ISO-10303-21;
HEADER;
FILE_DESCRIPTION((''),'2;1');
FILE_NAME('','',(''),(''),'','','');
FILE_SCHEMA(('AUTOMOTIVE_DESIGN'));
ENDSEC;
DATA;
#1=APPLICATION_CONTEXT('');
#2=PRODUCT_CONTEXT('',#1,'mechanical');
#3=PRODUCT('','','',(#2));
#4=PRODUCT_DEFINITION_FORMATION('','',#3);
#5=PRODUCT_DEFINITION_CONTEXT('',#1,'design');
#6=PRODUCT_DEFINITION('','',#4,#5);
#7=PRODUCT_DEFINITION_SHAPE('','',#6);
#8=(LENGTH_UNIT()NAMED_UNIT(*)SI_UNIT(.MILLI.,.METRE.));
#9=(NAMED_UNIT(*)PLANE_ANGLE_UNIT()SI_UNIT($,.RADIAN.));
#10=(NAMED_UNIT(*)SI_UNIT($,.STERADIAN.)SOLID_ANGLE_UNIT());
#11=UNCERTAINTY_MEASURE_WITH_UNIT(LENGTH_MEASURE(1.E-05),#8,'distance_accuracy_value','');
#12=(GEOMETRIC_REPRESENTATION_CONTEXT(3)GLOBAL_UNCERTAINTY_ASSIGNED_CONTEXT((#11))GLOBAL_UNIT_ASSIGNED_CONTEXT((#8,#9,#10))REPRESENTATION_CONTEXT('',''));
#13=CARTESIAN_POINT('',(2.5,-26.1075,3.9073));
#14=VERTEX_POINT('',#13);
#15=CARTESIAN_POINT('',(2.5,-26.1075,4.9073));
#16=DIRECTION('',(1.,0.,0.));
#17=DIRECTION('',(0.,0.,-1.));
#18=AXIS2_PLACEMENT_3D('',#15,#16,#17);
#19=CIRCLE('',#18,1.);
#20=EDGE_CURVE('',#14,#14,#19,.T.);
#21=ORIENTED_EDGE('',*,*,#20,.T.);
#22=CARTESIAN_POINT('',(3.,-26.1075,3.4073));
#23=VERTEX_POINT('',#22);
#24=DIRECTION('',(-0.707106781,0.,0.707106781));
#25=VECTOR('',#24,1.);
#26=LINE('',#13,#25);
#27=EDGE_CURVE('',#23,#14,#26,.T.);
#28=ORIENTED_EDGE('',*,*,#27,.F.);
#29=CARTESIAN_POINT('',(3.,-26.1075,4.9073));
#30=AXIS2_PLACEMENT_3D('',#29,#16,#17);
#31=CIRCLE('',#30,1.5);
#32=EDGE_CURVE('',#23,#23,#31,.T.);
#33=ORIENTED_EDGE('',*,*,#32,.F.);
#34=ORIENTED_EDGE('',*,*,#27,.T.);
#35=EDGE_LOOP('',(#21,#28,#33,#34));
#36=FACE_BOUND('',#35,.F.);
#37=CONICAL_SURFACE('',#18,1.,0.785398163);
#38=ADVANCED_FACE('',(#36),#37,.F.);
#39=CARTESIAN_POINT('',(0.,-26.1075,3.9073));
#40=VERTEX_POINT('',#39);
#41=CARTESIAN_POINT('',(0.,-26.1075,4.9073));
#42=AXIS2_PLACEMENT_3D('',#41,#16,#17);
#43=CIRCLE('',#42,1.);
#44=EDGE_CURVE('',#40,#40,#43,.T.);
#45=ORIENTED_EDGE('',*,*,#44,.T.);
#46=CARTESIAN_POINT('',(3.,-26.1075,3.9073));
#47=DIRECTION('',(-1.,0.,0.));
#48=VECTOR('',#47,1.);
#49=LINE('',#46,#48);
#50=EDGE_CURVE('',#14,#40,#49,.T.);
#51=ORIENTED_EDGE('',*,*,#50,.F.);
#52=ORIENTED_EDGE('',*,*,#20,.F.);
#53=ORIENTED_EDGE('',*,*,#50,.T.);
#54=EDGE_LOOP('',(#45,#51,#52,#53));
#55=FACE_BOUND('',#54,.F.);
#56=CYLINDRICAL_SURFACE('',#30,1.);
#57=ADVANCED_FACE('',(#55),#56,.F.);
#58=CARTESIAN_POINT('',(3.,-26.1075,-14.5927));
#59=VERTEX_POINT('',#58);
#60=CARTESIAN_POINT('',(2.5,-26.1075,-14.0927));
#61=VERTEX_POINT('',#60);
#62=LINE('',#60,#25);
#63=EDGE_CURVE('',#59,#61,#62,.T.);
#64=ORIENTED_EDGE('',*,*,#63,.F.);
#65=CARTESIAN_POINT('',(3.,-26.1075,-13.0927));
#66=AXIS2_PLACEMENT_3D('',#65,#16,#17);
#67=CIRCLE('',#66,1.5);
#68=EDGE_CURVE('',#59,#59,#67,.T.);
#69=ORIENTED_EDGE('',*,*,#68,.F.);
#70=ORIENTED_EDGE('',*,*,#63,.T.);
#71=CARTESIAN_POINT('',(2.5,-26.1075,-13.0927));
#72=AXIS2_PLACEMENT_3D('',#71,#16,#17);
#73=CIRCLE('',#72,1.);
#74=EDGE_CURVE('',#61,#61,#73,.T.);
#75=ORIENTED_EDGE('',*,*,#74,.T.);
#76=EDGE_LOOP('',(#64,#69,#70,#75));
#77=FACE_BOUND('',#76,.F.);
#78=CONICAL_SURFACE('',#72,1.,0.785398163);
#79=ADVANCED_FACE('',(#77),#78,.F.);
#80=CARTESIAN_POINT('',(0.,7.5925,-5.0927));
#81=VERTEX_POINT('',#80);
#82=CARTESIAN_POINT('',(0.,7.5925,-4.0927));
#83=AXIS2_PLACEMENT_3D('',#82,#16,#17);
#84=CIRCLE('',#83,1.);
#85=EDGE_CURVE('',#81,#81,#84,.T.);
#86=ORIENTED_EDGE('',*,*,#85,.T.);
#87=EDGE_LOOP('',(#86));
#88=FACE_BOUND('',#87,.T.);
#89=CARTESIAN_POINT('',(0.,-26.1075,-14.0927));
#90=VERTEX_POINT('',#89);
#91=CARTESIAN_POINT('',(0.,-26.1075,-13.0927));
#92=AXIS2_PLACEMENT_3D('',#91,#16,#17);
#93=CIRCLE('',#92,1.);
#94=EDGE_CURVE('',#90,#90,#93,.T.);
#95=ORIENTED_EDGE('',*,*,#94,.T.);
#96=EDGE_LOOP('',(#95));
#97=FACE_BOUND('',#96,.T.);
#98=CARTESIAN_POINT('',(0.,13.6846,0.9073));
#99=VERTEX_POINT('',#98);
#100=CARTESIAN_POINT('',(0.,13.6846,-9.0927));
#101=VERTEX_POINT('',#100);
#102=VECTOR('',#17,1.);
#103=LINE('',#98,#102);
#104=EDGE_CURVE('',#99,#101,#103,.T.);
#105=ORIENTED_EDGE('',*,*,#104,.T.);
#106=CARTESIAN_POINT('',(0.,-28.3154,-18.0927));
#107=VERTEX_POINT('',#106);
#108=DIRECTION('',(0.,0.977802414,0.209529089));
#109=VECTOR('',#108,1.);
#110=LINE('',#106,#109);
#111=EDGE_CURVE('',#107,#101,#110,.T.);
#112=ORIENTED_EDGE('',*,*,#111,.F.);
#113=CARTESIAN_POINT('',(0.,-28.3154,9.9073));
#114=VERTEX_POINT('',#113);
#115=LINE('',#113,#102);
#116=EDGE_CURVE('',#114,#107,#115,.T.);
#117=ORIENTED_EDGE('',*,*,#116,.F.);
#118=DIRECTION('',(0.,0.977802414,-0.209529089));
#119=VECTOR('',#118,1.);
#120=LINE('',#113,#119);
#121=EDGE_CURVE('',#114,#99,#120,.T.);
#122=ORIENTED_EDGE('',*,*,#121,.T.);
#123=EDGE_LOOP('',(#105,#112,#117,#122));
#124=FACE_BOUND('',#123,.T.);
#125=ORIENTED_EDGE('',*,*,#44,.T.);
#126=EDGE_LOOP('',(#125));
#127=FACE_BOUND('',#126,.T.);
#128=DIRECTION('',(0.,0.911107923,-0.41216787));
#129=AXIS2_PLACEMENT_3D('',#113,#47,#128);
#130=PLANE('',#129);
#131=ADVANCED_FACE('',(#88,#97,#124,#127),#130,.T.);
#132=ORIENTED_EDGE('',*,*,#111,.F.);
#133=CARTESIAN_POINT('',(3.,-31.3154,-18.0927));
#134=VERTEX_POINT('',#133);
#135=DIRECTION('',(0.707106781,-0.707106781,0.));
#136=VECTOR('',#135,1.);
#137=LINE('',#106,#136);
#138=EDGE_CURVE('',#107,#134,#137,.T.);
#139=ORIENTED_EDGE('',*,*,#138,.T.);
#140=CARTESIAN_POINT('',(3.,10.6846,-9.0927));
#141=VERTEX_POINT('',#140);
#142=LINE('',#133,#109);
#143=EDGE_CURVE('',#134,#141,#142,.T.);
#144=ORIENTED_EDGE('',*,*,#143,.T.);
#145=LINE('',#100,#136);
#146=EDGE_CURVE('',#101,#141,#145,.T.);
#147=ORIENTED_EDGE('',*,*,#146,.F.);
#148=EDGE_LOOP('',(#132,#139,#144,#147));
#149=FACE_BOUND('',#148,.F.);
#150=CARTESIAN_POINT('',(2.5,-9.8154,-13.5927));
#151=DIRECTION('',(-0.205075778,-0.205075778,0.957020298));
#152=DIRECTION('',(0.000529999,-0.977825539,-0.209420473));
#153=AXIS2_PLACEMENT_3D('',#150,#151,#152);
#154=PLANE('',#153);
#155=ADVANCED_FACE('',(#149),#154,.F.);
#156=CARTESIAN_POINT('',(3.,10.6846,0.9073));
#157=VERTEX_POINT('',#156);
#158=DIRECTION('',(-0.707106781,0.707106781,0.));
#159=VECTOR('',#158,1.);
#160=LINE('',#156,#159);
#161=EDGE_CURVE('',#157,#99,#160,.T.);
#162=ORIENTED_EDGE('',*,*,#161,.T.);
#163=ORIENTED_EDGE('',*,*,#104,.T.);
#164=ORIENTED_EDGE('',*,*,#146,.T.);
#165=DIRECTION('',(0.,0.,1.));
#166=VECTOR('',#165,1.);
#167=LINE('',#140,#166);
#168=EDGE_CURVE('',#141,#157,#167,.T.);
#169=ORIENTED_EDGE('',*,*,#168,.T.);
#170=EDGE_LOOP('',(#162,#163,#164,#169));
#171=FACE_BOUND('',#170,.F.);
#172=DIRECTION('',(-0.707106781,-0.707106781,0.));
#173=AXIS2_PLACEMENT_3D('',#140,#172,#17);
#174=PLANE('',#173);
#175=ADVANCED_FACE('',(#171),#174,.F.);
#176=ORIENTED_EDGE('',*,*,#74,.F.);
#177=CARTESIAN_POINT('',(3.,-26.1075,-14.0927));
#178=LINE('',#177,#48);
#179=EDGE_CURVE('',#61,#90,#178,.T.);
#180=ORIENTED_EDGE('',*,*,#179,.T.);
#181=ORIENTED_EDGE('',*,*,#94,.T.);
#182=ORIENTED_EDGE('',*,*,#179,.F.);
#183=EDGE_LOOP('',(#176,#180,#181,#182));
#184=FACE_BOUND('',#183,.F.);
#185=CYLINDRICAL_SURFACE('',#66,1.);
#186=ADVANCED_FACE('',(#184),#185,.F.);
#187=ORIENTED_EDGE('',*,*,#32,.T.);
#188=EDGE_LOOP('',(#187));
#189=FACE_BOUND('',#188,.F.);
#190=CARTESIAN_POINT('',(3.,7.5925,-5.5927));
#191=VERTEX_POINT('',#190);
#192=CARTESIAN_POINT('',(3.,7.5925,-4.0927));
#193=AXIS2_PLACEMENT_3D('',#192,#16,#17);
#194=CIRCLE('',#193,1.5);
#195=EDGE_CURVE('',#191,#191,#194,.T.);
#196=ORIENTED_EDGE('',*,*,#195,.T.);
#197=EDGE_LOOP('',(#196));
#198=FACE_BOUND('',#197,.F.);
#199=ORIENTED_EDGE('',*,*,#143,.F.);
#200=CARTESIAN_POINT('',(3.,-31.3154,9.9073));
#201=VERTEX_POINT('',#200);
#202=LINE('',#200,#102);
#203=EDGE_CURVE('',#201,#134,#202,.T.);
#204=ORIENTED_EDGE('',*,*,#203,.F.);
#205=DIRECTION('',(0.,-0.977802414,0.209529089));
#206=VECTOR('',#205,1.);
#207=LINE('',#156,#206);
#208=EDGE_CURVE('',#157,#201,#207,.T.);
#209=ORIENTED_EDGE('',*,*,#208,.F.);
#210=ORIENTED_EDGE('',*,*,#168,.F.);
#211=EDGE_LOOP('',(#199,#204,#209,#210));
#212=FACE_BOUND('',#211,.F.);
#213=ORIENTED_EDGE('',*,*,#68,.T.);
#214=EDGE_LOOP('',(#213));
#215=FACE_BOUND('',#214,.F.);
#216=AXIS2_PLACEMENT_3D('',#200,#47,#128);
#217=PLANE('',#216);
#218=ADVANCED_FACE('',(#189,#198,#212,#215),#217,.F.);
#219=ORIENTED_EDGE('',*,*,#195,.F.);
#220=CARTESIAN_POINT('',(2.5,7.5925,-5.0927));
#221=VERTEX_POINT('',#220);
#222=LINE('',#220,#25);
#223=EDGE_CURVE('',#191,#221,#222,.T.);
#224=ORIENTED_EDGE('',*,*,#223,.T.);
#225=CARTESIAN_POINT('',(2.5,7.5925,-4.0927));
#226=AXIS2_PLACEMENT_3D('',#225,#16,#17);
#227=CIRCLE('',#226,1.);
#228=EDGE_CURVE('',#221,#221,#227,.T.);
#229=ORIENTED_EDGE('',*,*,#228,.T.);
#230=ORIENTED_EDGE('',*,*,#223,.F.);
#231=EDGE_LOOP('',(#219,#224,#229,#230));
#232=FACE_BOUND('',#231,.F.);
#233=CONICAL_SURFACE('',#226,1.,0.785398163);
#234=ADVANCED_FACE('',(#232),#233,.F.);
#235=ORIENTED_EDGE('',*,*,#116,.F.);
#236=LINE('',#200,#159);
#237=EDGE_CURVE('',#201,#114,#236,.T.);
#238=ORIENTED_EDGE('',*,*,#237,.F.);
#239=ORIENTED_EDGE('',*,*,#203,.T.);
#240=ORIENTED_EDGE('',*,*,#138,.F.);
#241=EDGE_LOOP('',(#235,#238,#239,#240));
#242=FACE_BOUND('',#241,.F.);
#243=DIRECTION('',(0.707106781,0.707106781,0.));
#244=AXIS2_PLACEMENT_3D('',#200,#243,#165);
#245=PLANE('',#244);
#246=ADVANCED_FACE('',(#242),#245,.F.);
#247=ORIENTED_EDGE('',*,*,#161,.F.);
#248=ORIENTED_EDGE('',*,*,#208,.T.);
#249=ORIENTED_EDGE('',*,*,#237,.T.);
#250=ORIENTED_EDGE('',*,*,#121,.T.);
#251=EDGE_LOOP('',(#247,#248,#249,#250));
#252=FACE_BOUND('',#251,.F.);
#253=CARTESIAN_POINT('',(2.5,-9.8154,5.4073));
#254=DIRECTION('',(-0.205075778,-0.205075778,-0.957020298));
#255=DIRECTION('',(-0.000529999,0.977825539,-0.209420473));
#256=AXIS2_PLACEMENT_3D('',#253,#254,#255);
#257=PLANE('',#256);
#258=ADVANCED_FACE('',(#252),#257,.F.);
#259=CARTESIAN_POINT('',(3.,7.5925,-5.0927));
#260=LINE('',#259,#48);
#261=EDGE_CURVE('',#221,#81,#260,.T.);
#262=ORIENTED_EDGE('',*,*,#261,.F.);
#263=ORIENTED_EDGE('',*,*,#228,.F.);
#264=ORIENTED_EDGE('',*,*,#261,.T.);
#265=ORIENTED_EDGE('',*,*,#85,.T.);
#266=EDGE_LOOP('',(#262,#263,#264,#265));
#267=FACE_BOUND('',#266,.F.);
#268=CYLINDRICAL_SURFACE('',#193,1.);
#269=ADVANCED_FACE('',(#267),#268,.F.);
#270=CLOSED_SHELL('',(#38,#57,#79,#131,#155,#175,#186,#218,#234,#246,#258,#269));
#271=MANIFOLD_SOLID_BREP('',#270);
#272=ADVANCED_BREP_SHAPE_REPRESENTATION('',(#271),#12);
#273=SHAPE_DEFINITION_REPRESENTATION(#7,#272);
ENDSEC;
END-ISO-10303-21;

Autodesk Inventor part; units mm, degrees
sketch "Sketch1" plane through (0, 0, 0) normal (1, 0, 0) x (0, 1, 0)
  line L0 (-28.3154, 9.9073) -> (-28.3154, -18.0927)
  line L1 (13.6846, -4.0927) -> (13.6846, -9.0927)
  line L2 (13.6846, -4.0927) -> (13.6846, 0.9073)
  line L3 (-28.3154, 9.9073) -> (13.6846, 0.9073)
  line L4 (-28.3154, -18.0927) -> (13.6846, -9.0927)
  point P0 (0, 0)
ref_plane "Work Plane2" through (1, 0, 0) normal (1, 0, 0) x (0, 1, 0)
sketch "Sketch5" plane through (1, 0, 0) normal (1, 0, 0) x (0, 1, 0)
  line L0 (-29.3154, 9.9073) -> (12.6846, 0.9073)
  line L1 (12.6846, -4.0927) -> (12.6846, 0.9073)
  line L2 (12.6846, -4.0927) -> (12.6846, -9.0927)
  line L3 (-29.3154, -18.0927) -> (12.6846, -9.0927)
  line L4 (-29.3154, 9.9073) -> (-29.3154, -18.0927)
  point P0 (0, 0)
loft "Loft1" add profiles "Sketch1", "Sketch5"
ref_plane "Work Plane8" through (2, 0, 0) normal (1, 0, 0) x (0, 1, 0)
sketch "Sketch8" plane through (2, 0, 0) normal (1, 0, 0) x (0, 1, 0)
  line L0 (-30.3154, 9.9073) -> (11.6846, 0.9073)
  line L1 (11.6846, -9.0927) -> (-30.3154, -18.0927)
  line L2 (-30.3154, -18.0927) -> (-30.3154, 9.9073)
  line L3 (11.6846, 0.9073) -> (11.6846, -9.0927)
  point P0 (0, 0)
loft "Loft2" add profiles "Sketch8" section 1 edges at (1, -29.3154, -4.0927) (1, -8.3154, -13.5927) (1, 12.6846, -6.5927) (1, 12.6846, -1.5927) (1, -8.3154, 5.4073)
ref_plane "Work Plane6" through (3, 0, 0) normal (1, 0, 0) x (0, 1, 0)
sketch "Sketch9" plane through (3, 0, 0) normal (1, 0, 0) x (0, 1, 0)
  line L0 (-31.3154, 9.9073) -> (-31.3154, -18.0927)
  line L1 (-31.3154, -18.0927) -> (10.6846, -9.0927)
  line L2 (10.6846, -9.0927) -> (10.6846, 0.9073)
  line L3 (10.6846, 0.9073) -> (-31.3154, 9.9073)
  line L4 (11.6846, -9.0927) -> (11.6846, 0.9073) projected
  point P0 (-1, 0)
loft "Loft3" add profiles "Sketch9" section 1 edges at (2, -30.3154, -4.0927) (2, -9.3154, -13.5927) (2, 11.6846, -4.0927) (2, -9.3154, 5.4073)
sketch "Sketch10" plane through (3, -31.3154, 9.9073) normal (1, 0, 0) x (0, 0, -1)
  circle A0 centre (5, 5.2079) radius 1
  circle A1 centre (23, 5.2079) radius 1
  circle A2 centre (14, 38.9079) radius 1
  point P0 (9.9073, 31.3154)
  dimension "d36" = 33.7
  dimension "d37" = 33.7
  dimension "d38" = 18
  dimension "d39" = 9
extrude "Extrusion1" cut sketch "Sketch10" against normal blind 3
chamfer "Chamfer1" distance 0.5 angle 45 1 edges at (3, -26.1075, 5.9073)
chamfer "Chamfer2" distance 0.5 angle 45 2 edges at (3, -26.1075, -12.0927) (3, 7.5925, -3.0927)
properties part number "triangular"
